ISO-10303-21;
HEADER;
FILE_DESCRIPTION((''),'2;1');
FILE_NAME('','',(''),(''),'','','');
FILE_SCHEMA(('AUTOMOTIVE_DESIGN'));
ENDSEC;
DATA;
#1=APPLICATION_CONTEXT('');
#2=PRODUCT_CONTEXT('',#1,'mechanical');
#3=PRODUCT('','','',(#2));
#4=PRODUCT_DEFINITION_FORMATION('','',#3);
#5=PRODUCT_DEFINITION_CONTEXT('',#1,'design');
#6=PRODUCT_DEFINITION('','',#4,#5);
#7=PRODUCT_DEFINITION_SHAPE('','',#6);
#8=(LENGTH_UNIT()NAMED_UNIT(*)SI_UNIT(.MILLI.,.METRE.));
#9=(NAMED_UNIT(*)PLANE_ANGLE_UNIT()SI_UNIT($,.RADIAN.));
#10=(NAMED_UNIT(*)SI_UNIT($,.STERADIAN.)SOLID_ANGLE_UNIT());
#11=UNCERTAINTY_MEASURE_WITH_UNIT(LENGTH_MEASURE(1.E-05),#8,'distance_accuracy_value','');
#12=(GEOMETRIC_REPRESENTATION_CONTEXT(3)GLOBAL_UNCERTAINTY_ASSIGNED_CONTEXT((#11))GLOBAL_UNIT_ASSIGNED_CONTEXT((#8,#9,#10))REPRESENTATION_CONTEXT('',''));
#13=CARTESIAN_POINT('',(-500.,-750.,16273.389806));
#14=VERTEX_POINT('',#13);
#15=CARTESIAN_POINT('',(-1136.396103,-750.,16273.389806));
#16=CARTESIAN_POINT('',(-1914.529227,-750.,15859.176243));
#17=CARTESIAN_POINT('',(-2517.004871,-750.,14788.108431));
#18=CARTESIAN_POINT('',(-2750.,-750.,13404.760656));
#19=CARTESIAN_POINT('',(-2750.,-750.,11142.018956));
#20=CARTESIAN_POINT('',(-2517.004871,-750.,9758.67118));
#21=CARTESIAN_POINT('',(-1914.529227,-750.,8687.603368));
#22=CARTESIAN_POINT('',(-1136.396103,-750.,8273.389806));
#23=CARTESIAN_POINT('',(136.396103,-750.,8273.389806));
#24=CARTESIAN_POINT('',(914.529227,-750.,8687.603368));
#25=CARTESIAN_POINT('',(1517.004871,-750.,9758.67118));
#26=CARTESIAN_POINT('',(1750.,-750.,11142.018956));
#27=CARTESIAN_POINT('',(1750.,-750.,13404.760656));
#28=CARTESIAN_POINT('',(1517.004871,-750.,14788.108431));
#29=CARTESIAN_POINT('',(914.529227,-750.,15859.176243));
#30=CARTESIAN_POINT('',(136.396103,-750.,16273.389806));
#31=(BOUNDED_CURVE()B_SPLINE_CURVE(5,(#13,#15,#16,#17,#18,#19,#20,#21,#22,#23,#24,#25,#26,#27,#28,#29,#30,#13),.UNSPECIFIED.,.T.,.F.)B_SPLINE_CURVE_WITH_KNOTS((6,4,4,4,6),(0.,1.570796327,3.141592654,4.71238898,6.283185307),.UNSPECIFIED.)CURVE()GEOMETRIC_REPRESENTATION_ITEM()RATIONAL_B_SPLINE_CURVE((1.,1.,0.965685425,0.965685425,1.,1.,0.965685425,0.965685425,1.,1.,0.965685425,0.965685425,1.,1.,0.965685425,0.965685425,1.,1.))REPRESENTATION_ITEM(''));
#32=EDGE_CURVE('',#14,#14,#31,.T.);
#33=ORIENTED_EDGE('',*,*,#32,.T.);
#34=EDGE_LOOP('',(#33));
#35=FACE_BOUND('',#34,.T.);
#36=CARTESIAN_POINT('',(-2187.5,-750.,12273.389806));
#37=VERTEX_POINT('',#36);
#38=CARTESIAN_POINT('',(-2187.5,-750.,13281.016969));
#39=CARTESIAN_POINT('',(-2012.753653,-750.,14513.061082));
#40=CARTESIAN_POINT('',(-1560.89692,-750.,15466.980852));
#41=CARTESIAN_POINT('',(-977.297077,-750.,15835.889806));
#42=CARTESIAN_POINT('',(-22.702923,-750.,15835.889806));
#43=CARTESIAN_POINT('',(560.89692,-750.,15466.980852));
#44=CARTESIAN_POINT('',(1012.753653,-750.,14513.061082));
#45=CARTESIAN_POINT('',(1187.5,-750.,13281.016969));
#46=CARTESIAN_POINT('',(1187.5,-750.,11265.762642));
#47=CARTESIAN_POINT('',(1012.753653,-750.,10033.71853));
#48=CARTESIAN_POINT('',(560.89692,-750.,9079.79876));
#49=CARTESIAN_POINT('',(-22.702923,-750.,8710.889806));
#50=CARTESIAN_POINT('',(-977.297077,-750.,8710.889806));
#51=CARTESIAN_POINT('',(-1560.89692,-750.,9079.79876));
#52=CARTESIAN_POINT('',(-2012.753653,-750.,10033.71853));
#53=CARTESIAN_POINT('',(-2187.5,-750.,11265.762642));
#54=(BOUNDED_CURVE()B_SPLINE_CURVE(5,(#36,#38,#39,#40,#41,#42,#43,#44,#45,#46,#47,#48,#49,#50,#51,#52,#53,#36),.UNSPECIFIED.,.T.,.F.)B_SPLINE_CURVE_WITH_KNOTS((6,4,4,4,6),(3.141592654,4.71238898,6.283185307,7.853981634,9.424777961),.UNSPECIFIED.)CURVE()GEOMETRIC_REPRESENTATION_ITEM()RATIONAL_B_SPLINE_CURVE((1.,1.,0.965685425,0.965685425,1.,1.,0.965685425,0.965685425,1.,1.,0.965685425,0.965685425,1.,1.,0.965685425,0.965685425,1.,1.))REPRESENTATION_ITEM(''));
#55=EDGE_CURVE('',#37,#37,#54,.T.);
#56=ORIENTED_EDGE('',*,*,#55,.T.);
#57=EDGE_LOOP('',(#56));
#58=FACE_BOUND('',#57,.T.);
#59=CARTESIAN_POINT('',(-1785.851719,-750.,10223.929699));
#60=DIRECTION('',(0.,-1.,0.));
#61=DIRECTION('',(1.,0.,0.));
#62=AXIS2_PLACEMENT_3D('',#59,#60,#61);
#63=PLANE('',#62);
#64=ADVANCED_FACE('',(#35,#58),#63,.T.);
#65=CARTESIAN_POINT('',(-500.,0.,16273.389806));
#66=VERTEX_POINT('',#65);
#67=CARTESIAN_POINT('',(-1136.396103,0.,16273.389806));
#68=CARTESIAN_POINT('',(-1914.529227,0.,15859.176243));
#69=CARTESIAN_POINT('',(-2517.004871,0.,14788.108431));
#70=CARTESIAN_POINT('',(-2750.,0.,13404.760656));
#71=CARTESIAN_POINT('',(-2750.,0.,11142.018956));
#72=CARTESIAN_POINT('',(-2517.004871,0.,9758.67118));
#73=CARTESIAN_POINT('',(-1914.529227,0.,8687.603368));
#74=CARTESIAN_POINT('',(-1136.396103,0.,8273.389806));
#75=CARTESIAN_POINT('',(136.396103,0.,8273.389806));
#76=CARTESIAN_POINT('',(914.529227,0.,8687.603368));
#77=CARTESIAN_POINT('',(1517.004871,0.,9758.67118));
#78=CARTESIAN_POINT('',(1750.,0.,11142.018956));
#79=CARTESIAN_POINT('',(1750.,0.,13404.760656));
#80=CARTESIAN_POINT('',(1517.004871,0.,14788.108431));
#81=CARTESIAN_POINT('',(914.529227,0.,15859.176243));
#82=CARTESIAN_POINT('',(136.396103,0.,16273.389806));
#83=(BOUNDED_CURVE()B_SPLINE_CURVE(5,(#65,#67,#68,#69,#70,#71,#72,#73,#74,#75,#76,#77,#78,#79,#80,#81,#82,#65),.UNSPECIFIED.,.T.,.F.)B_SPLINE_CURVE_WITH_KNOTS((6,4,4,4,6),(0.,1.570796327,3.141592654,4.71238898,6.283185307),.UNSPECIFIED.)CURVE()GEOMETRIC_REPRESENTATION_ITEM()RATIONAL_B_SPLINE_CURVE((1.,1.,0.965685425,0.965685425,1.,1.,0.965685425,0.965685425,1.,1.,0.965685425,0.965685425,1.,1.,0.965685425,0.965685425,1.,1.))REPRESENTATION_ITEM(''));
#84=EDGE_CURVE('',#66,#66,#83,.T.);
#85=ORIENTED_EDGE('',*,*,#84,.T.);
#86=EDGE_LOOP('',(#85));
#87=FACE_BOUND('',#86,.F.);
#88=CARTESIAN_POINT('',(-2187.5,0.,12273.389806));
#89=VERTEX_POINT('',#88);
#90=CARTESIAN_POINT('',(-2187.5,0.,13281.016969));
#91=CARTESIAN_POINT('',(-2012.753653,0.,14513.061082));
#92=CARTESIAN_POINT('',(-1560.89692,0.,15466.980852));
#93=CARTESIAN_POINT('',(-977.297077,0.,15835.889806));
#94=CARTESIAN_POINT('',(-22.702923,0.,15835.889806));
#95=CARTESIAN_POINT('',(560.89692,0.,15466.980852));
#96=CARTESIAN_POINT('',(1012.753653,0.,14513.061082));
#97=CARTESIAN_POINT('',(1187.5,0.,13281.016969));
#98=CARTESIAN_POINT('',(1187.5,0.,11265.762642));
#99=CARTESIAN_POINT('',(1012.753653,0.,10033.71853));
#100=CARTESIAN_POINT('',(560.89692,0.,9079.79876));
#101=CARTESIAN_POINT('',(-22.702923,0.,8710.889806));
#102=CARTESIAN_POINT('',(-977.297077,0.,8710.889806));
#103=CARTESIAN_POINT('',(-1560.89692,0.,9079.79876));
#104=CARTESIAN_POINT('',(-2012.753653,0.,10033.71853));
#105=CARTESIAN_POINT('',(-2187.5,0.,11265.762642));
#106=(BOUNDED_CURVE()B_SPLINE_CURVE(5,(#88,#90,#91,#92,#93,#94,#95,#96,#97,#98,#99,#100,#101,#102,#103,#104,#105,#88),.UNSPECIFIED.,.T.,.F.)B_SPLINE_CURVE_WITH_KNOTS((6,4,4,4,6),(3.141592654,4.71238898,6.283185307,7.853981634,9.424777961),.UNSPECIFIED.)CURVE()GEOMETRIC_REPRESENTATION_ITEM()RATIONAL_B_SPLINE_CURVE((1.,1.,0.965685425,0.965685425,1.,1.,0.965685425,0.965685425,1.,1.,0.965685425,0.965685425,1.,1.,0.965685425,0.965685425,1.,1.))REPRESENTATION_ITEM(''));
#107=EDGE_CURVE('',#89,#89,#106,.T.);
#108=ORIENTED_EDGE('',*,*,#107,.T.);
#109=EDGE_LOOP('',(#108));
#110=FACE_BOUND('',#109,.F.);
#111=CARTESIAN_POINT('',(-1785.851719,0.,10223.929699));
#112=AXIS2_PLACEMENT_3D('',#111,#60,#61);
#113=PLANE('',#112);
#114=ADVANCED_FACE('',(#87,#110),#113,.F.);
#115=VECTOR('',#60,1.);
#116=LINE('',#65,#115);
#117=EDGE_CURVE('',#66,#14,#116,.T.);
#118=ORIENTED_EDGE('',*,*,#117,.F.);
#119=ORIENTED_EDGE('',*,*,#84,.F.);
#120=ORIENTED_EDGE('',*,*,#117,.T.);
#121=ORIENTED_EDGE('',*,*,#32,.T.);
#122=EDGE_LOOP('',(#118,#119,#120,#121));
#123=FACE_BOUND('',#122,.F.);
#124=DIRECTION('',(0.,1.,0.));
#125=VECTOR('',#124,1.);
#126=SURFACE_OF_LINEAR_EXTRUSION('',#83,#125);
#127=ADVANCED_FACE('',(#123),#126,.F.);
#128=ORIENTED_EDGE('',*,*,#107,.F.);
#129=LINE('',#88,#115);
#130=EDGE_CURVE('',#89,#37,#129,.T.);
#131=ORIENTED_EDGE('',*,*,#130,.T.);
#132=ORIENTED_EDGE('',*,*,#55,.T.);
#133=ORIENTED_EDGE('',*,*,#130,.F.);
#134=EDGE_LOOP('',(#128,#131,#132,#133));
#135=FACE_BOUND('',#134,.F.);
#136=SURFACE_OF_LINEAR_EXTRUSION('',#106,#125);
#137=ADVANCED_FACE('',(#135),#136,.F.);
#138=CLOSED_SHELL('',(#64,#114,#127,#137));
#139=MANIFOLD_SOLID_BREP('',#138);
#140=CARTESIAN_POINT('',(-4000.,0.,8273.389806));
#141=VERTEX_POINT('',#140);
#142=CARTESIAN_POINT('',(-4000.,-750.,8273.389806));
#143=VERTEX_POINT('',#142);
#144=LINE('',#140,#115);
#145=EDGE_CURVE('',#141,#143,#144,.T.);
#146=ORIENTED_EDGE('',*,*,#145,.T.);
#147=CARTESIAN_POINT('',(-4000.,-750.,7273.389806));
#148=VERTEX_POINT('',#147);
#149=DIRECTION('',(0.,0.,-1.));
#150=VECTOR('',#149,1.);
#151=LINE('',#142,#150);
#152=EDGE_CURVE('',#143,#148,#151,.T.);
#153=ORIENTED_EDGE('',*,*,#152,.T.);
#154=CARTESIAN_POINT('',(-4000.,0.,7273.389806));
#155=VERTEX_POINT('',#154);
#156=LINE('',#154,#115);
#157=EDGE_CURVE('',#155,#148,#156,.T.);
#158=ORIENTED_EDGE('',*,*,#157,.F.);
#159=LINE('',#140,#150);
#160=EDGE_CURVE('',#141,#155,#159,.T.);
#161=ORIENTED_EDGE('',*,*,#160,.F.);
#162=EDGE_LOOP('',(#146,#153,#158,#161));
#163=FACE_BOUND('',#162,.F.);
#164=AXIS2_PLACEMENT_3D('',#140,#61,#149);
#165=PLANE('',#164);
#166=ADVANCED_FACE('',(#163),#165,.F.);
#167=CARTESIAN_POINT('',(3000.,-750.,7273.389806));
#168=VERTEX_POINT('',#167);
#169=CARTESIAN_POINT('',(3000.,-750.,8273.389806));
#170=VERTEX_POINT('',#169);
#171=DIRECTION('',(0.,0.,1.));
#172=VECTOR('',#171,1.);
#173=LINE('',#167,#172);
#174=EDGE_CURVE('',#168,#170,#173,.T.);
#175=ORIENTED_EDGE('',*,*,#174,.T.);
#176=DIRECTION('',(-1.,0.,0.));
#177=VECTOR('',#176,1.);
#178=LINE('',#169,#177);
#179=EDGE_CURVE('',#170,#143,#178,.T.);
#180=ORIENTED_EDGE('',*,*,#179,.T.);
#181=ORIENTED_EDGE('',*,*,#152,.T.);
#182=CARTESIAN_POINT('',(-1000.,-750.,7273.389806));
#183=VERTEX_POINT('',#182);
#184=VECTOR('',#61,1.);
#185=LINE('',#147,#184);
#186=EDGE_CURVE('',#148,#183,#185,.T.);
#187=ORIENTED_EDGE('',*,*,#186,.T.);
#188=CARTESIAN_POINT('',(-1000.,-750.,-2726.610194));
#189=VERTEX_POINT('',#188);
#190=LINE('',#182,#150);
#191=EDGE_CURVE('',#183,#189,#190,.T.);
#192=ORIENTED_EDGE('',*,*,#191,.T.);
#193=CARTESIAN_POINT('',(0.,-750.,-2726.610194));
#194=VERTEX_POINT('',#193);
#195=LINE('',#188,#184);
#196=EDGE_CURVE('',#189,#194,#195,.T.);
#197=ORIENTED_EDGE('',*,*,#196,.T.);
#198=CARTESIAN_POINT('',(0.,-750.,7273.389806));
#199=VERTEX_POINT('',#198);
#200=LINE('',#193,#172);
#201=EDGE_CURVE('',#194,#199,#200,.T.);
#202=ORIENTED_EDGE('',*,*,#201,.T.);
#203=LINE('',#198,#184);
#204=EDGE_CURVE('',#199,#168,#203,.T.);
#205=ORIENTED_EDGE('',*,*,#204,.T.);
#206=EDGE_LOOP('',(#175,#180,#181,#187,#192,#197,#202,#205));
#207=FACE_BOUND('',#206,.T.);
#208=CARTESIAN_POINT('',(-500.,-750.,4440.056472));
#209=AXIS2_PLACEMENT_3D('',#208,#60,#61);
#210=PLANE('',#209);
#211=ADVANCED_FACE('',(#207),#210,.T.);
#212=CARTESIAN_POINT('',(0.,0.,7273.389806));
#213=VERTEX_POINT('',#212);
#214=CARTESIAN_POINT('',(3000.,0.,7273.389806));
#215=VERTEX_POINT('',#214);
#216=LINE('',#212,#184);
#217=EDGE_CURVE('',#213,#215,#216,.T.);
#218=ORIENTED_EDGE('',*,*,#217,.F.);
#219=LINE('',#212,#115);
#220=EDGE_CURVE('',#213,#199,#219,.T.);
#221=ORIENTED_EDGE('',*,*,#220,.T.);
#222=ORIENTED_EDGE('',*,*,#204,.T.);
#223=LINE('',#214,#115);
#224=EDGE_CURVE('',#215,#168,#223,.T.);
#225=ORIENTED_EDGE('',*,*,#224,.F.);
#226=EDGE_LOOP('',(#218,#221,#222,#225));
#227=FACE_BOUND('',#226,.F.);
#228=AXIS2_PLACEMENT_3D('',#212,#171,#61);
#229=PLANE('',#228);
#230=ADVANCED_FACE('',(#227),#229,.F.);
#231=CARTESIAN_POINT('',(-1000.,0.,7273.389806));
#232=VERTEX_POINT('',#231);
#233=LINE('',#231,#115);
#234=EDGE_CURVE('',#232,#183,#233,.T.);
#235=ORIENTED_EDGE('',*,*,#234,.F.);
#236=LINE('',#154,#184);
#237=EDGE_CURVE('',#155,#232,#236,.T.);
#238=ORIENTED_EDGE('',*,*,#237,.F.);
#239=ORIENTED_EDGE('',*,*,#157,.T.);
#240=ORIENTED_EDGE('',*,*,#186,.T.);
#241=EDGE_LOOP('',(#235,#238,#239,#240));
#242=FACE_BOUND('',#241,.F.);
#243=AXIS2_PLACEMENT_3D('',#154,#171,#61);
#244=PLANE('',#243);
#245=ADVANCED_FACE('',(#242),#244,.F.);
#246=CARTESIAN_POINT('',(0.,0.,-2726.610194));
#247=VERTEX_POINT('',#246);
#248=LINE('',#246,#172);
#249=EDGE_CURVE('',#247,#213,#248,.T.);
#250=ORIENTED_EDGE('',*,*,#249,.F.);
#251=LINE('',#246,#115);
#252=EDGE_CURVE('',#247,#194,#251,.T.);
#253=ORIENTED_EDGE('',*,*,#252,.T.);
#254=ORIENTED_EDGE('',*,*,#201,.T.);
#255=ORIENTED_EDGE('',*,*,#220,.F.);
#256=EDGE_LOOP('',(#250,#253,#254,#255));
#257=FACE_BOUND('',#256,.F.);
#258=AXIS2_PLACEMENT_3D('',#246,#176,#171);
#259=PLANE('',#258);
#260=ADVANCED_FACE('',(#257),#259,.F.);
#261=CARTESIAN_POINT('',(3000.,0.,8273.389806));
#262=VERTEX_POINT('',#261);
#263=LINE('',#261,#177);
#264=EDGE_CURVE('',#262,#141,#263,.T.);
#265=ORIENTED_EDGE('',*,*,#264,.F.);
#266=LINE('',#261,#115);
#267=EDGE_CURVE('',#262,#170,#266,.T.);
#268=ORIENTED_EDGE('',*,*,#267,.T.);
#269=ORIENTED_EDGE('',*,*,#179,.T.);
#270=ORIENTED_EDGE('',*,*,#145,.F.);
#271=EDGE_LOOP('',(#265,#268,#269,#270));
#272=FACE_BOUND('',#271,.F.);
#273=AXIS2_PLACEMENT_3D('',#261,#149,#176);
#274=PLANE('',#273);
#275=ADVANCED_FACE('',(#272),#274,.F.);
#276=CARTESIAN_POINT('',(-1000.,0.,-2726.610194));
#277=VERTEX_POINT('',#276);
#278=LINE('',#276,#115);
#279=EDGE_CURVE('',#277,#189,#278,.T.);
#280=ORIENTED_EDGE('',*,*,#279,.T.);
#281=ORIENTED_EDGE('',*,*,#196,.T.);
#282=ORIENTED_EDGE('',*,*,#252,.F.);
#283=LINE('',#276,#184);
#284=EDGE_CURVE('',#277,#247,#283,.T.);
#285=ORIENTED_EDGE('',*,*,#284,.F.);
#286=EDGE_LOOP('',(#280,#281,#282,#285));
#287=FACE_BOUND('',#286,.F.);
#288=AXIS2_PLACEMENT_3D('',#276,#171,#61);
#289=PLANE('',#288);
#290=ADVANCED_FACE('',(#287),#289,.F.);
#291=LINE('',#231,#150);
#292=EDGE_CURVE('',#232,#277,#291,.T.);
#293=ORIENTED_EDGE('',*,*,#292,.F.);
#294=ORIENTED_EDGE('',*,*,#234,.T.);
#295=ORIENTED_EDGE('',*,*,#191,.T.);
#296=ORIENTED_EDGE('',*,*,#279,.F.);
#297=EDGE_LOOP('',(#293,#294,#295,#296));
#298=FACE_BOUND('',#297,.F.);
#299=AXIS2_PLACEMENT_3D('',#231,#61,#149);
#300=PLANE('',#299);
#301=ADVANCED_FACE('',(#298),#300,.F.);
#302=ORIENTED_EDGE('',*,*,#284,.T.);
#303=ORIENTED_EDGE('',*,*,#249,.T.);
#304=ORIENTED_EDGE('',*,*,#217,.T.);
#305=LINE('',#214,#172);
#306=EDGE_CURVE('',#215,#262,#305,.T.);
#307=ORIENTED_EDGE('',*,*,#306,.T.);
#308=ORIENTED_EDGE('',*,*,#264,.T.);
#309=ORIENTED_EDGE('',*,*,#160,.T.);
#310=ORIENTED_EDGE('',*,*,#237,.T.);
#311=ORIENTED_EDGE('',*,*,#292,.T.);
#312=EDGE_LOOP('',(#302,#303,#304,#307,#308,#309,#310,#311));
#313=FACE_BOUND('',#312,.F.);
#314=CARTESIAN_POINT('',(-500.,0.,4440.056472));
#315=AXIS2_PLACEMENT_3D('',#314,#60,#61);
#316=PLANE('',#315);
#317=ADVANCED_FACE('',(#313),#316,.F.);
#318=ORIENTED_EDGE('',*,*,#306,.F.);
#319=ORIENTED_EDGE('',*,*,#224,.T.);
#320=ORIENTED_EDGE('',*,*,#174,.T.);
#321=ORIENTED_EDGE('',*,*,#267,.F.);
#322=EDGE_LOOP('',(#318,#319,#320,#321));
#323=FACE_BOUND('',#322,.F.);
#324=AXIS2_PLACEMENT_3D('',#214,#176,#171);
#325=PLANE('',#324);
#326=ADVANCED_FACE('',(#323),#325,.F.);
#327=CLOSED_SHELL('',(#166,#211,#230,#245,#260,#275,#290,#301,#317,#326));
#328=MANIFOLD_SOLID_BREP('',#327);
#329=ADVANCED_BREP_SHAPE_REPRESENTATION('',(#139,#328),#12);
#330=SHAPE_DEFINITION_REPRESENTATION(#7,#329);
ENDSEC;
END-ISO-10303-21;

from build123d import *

# Parameters (mm, degrees)
F1_DEPTH = 750


with BuildPart() as f1:
    # F0 (on Front) → F1 (new body)
    with BuildSketch(Plane.XZ):
        with BuildLine():
            add(Edge.make_bspline(
                [(-2750, 12273.3898056417), (-2750, 8273.3898056417), (-500, 8273.3898056417)],
                knots=[1.5707963268, 1.5707963268, 1.5707963268, 3.1415926536, 3.1415926536, 3.1415926536], degree=2, weights=[1, 0.7071067812, 1]))
            Line((-500, 8273.3898056417), (-500, 8710.8898056417))
            add(Edge.make_bspline(
                [(-2187.5, 12273.3898056417), (-2187.5, 8710.8898056417), (-500, 8710.8898056417)],
                knots=[4.7123889804, 4.7123889804, 4.7123889804, 6.2831853072, 6.2831853072, 6.2831853072], degree=2, weights=[1, 0.7071067812, 1]))
            Line((-2187.5, 12273.3898056417), (-2750, 12273.3898056417))
        make_face()
        with BuildLine():
            Line((-500, 8710.8898056417), (-500, 8273.3898056417))
            add(Edge.make_bspline(
                [(-500, 8273.3898056417), (1750, 8273.3898056417), (1750, 12273.3898056417), (1750, 16273.3898056417), (-500, 16273.3898056417)],
                knots=[3.1415926536, 3.1415926536, 3.1415926536, 4.7123889804, 4.7123889804, 6.2831853072, 6.2831853072, 6.2831853072], degree=2, weights=[1, 0.7071067812, 1, 0.7071067812, 1]))
            Line((-500, 16273.3898056417), (-500, 15835.8898056417))
            add(Edge.make_bspline(
                [(-500, 8710.8898056417), (1187.5, 8710.8898056417), (1187.5, 12273.3898056416), (1187.5, 15835.8898056416), (-500, 15835.8898056417)],
                knots=[0, 0, 0, 1.5707963268, 1.5707963268, 3.1415926536, 3.1415926536, 3.1415926536], degree=2, weights=[1, 0.7071067812, 1, 0.7071067812, 1]))
        make_face()
        with BuildLine():
            add(Edge.make_bspline(
                [(-500, 16273.3898056417), (-2750, 16273.3898056417), (-2750, 12273.3898056417)],
                knots=[0, 0, 0, 1.5707963268, 1.5707963268, 1.5707963268], degree=2, weights=[1, 0.7071067812, 1]))
            Line((-2750, 12273.3898056417), (-2187.5, 12273.3898056417))
            add(Edge.make_bspline(
                [(-500, 15835.8898056417), (-2187.5, 15835.8898056417), (-2187.5, 12273.3898056417)],
                knots=[3.1415926536, 3.1415926536, 3.1415926536, 4.7123889804, 4.7123889804, 4.7123889804], degree=2, weights=[1, 0.7071067812, 1]))
            Line((-500, 15835.8898056417), (-500, 16273.3898056417))
        make_face()
    extrude(amount=F1_DEPTH)


with BuildPart() as f1b:
    # F0 (on Front) → F1, piece 2 (new body)
    with BuildSketch(Plane.XZ):
        Polygon((-1000, -2726.6101943583), (0, -2726.6101943583), (0, 7273.3898056417), (3000, 7273.3898056417), (3000, 8273.3898056417), (-500, 8273.3898056417), (-4000, 8273.3898056417), (-4000, 7273.3898056417), (-1000, 7273.3898056417), align=None)
    extrude(amount=F1_DEPTH)


solid = Compound([f1.part, f1b.part])
